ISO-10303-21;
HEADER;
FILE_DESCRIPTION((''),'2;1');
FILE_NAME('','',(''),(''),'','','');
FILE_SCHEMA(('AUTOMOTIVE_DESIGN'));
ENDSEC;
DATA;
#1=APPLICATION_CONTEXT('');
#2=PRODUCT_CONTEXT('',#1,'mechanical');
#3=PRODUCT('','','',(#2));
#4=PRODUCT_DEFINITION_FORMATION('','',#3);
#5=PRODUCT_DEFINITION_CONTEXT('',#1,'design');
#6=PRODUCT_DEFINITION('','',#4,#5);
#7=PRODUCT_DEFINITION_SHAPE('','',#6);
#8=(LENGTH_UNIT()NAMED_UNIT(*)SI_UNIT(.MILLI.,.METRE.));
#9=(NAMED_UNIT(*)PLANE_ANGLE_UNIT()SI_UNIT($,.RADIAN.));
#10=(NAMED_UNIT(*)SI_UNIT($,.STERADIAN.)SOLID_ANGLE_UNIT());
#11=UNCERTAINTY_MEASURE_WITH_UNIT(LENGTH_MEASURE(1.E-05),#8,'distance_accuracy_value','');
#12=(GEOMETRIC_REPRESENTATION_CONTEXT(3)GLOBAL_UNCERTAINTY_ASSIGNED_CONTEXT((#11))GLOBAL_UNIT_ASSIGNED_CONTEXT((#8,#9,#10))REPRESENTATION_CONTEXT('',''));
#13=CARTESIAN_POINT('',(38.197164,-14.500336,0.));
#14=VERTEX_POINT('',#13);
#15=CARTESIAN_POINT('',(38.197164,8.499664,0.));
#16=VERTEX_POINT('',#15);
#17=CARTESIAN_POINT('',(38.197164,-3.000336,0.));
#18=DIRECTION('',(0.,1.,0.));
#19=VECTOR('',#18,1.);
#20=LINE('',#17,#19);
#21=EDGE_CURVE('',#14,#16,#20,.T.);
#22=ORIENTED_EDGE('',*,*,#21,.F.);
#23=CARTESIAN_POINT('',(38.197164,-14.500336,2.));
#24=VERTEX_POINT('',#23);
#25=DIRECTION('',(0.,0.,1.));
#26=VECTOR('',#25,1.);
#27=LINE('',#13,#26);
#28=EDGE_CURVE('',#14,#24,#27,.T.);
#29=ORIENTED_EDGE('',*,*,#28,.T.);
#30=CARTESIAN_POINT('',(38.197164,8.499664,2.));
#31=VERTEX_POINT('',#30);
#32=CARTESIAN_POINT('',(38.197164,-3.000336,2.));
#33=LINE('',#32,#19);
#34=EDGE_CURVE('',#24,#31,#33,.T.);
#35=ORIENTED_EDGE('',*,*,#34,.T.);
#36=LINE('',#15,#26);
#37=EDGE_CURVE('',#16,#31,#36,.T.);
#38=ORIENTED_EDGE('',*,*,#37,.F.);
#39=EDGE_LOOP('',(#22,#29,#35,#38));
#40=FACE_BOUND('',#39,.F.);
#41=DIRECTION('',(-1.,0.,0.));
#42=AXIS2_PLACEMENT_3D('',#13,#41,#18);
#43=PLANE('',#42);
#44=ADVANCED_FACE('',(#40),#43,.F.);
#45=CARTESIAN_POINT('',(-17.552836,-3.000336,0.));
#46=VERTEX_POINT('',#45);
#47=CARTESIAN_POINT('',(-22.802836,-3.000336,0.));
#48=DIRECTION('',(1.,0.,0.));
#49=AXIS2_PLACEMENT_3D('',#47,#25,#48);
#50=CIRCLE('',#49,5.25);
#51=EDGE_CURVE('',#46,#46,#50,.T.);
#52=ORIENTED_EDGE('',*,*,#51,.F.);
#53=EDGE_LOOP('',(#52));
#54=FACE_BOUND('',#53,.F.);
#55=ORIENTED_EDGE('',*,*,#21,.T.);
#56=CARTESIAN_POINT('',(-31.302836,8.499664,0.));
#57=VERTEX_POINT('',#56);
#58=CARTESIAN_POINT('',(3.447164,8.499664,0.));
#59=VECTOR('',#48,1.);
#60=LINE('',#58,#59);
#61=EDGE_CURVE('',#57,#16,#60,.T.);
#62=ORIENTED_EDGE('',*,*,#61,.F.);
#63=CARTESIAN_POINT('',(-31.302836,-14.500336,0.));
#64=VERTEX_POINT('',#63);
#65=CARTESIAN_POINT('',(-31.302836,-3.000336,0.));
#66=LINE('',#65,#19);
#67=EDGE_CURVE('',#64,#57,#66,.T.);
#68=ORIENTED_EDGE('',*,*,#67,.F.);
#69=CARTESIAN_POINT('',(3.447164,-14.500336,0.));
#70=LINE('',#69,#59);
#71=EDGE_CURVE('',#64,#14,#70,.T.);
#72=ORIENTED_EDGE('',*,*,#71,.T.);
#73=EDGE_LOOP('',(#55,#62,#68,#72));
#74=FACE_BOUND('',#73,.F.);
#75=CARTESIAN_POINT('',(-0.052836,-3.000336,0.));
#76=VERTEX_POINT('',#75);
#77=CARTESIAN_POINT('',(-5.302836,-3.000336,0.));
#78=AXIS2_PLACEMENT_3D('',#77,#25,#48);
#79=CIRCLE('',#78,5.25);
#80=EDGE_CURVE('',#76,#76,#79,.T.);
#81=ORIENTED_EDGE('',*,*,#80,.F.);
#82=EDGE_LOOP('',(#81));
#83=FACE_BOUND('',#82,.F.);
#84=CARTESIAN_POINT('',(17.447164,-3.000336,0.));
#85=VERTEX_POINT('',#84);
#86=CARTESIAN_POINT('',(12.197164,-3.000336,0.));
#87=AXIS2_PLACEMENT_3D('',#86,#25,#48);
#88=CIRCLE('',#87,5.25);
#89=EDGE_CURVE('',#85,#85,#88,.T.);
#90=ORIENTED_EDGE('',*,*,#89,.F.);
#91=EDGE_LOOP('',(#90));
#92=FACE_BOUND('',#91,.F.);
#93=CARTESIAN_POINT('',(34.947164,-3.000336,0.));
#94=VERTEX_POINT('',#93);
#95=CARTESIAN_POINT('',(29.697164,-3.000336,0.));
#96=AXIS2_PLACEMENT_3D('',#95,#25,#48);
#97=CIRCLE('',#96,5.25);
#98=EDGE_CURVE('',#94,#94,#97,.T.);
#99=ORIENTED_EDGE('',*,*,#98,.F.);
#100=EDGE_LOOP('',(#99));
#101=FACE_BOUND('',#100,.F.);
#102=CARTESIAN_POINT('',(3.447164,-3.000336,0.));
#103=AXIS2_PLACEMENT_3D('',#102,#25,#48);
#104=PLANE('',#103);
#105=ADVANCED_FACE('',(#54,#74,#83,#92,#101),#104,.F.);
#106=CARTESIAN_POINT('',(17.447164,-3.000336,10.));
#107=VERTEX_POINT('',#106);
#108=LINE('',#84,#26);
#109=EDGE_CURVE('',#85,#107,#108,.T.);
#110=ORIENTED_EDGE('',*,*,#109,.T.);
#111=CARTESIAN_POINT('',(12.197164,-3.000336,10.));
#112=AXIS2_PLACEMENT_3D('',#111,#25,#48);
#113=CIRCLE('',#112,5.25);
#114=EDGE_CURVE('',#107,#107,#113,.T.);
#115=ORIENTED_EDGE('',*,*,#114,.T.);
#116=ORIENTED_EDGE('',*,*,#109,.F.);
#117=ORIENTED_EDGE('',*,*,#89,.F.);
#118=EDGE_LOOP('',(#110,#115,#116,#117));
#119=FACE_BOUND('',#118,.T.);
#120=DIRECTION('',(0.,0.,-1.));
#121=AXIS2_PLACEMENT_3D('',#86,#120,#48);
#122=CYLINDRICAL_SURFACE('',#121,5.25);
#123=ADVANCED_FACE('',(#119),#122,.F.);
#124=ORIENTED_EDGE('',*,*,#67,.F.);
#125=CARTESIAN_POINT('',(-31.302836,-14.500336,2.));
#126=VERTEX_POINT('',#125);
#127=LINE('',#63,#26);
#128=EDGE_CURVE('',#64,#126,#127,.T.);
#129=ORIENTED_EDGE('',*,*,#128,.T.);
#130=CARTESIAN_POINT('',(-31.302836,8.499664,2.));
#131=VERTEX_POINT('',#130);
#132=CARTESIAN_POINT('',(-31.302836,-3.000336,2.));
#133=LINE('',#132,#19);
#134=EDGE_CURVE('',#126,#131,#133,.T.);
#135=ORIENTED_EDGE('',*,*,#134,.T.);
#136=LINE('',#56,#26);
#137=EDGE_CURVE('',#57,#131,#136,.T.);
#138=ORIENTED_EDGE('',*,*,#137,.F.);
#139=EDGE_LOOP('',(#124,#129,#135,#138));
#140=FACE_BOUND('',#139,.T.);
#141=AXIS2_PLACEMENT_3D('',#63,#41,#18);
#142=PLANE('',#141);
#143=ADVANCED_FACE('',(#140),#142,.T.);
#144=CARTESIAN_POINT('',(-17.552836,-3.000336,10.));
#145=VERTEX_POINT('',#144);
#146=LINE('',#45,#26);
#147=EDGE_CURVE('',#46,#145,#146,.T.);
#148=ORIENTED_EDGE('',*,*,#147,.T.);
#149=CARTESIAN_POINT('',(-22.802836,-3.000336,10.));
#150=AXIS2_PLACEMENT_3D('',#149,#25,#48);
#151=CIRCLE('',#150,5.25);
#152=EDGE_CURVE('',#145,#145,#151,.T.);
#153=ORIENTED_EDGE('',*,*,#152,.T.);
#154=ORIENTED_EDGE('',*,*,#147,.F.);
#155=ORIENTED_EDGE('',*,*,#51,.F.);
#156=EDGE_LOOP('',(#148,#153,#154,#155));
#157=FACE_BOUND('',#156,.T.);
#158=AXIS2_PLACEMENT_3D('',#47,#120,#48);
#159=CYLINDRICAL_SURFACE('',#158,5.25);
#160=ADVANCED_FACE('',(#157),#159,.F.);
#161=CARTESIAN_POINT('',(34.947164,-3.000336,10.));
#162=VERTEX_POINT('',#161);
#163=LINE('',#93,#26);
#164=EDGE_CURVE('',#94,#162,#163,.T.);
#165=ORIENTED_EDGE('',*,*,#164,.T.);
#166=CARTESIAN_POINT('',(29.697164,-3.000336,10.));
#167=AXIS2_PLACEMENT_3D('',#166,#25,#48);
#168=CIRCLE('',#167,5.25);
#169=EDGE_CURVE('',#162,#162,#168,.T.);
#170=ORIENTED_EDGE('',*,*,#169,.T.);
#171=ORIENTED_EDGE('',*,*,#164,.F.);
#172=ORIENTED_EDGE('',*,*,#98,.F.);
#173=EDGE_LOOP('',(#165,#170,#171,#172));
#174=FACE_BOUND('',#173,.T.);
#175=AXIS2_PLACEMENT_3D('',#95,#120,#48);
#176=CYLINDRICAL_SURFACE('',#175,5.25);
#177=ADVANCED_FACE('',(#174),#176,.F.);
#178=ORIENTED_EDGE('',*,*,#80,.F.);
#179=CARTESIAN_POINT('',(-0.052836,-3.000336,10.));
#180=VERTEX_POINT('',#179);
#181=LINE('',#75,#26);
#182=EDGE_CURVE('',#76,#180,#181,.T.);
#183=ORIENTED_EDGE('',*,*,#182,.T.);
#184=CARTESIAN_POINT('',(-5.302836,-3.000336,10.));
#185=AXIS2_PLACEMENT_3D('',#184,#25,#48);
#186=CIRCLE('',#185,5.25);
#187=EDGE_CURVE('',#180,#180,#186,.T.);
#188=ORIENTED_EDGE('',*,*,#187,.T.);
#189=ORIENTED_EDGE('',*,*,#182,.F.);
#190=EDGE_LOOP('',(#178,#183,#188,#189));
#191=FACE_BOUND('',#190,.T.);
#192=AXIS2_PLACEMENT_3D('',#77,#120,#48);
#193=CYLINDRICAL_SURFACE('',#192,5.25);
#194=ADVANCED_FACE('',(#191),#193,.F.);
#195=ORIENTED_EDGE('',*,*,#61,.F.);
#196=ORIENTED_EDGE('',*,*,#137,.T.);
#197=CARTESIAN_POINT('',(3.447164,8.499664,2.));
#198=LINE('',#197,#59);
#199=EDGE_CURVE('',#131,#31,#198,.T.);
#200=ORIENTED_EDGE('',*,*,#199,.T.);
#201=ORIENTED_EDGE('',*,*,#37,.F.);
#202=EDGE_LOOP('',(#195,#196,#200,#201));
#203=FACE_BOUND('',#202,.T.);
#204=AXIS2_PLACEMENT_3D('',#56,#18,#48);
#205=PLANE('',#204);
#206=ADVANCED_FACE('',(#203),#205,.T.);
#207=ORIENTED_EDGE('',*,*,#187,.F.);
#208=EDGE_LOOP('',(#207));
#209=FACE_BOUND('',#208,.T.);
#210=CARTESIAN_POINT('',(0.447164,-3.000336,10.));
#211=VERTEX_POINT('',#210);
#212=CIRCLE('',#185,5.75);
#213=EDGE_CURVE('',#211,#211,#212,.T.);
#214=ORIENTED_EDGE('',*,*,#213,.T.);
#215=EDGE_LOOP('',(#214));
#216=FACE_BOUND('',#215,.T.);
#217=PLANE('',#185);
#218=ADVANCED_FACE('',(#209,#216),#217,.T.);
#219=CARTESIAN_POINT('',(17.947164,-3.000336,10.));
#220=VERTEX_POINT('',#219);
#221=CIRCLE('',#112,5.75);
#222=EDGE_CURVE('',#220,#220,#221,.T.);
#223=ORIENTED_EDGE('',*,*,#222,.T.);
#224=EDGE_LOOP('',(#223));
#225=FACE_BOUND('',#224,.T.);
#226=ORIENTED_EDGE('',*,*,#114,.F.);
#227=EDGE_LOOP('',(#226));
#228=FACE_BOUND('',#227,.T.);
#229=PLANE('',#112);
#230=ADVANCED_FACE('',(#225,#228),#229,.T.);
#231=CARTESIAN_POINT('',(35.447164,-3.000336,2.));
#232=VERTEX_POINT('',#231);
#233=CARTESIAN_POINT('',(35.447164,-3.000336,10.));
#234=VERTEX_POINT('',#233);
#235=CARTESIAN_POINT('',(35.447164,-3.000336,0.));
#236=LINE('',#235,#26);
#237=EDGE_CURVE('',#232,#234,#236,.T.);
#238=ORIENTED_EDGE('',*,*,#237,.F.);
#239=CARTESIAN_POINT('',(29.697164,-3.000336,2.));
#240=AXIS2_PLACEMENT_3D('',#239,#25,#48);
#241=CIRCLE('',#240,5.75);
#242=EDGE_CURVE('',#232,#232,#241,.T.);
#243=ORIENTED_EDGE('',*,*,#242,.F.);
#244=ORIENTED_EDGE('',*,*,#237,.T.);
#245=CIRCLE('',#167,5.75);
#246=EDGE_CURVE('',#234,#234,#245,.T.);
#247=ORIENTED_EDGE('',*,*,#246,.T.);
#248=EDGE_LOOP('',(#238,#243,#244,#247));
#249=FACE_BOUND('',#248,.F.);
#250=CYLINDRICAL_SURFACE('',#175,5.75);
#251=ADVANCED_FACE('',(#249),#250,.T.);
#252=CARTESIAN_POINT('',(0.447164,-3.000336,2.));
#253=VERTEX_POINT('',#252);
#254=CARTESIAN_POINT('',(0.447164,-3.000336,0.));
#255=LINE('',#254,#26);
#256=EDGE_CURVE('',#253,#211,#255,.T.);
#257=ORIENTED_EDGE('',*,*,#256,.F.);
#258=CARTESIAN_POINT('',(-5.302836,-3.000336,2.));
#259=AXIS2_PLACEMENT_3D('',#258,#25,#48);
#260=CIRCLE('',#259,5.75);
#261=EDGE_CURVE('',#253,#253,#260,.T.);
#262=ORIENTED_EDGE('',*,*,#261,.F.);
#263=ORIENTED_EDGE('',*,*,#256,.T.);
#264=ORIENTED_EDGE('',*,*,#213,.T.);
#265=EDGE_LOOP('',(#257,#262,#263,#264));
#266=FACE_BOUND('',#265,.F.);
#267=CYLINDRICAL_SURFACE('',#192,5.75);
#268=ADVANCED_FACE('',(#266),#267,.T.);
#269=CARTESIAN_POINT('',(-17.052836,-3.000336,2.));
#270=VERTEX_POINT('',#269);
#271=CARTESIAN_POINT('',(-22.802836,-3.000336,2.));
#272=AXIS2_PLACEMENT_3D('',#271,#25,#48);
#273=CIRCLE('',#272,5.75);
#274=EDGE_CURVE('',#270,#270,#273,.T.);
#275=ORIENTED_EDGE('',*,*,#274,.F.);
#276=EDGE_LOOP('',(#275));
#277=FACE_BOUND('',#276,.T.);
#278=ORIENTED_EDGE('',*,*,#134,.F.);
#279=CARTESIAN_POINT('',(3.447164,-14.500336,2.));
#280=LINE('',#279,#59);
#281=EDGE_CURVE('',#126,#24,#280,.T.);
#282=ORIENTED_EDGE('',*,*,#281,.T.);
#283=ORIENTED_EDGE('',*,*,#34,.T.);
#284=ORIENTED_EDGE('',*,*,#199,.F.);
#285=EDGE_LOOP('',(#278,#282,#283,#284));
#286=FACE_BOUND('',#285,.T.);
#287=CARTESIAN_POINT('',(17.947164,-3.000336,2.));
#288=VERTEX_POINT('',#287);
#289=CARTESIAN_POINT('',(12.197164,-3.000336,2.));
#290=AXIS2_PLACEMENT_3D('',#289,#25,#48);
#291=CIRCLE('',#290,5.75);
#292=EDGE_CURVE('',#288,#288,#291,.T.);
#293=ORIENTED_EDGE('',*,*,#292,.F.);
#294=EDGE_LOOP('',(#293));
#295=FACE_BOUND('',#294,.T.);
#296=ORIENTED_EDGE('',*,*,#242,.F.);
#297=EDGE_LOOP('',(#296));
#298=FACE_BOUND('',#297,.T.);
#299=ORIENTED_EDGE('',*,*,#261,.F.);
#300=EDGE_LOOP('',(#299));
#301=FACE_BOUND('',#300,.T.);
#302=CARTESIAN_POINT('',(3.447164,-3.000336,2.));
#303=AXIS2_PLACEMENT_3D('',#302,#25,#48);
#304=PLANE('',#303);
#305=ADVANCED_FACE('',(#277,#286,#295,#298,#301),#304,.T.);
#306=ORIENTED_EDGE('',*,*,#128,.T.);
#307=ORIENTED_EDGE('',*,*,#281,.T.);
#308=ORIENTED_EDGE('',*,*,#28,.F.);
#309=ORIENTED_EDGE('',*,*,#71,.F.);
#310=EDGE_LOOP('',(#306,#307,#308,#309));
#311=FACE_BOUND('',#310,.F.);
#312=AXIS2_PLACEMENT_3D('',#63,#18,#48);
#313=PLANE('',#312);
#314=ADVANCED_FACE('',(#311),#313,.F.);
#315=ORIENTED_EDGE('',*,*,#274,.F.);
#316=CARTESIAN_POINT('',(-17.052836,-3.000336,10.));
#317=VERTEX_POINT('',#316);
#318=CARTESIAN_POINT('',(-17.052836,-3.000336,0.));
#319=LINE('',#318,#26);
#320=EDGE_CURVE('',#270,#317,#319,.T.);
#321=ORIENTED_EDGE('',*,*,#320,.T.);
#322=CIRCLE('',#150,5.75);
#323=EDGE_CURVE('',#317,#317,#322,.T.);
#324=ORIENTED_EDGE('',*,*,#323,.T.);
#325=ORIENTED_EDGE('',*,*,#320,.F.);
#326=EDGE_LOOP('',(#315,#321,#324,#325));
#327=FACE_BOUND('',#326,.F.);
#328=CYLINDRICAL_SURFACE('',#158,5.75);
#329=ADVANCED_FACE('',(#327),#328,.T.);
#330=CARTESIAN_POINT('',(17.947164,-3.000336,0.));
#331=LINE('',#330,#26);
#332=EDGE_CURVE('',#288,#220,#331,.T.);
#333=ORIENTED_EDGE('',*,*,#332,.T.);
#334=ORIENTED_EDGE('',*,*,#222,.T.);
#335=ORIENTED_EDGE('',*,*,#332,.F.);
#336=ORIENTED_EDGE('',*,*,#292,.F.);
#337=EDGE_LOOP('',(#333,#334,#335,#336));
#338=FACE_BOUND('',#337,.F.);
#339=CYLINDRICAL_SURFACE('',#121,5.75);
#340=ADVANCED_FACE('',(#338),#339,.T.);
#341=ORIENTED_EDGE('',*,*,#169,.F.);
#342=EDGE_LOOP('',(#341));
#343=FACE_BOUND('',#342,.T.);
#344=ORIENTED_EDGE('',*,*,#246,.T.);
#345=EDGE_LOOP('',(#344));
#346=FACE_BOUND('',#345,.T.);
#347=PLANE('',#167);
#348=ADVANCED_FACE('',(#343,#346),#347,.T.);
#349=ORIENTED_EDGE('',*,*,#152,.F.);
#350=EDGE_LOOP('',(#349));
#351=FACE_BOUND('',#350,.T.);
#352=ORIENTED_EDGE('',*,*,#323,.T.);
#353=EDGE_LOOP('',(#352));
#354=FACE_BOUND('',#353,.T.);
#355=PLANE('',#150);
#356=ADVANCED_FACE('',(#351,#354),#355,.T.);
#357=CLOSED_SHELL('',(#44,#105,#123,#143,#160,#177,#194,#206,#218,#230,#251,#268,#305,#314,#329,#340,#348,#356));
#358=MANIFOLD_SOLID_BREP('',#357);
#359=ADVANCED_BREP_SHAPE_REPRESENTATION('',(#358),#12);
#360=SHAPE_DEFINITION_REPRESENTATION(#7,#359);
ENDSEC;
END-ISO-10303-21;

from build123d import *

# Parameters (mm, degrees)
F0_W     = 69.5
F0_H     = 23
F0_R     = 5.75
F0_W_2   = 1
F0_H_2   = 4
F1_DEPTH = 2
F0_R_2   = 5.25
F2_DEPTH = 10


with BuildPart() as f1:
    # F0 (on Top) → F1 (new body)
    with BuildSketch(Plane.XY):
        with Locations((3.4471642077, -3.0003356891)):
            Rectangle(F0_W, F0_H)
        Polygon((-29.8028357923, -13.0003356891), (-29.8028357923, 6.9996643109), (-15.8028357923, 6.9996643109), (-14.8028357923, 6.9996643109), (-13.3028357923, 6.9996643109), (-12.3028357923, 6.9996643109), (1.6971642077, 6.9996643109), (2.6971642077, 6.9996643109), (4.1971642077, 6.9996643109), (5.1971642077, 6.9996643109), (19.1971642077, 6.9996643109), (20.1971642077, 6.9996643109), (21.6971642077, 6.9996643109), (22.6971642077, 6.9996643109), (36.6971642077, 6.9996643109), (36.6971642077, -13.0003356891), (22.6971642077, -13.0003356891), (21.6971642077, -13.0003356891), (20.1971642077, -13.0003356891), (19.1971642077, -13.0003356891), (5.1971642077, -13.0003356891), (5.1971642077, -9.0003356891), (4.1971642077, -9.0003356891), (4.1971642077, -13.0003356891), (2.6971642077, -13.0003356891), (1.6971642077, -13.0003356891), (-12.3028357923, -13.0003356891), (-13.3028357923, -13.0003356891), (-14.8028357923, -13.0003356891), (-15.8028357923, -13.0003356891), align=None, mode=Mode.SUBTRACT)
        Polygon((-15.8028357923, 6.9996643109), (-29.8028357923, 6.9996643109), (-29.8028357923, -13.0003356891), (-15.8028357923, -13.0003356891), (-15.8028357923, -9.0003356891), (-14.8028357923, -9.0003356891), (-14.8028357923, -13.0003356891), (-13.3028357923, -13.0003356891), (-13.3028357923, -9.0003356891), (-12.3028357923, -9.0003356891), (-12.3028357923, -13.0003356891), (1.6971642077, -13.0003356891), (1.6971642077, -9.0003356891), (2.6971642077, -9.0003356891), (2.6971642077, -13.0003356891), (4.1971642077, -13.0003356891), (4.1971642077, -9.0003356891), (5.1971642077, -9.0003356891), (5.1971642077, -13.0003356891), (19.1971642077, -13.0003356891), (19.1971642077, -9.0003356891), (20.1971642077, -9.0003356891), (20.1971642077, -13.0003356891), (21.6971642077, -13.0003356891), (21.6971642077, -9.0003356891), (22.6971642077, -9.0003356891), (22.6971642077, -13.0003356891), (36.6971642077, -13.0003356891), (36.6971642077, 6.9996643109), (22.6971642077, 6.9996643109), (22.6971642077, 2.9996643109), (21.6971642077, 2.9996643109), (21.6971642077, 6.9996643109), (20.1971642077, 6.9996643109), (20.1971642077, 2.9996643109), (19.1971642077, 2.9996643109), (19.1971642077, 6.9996643109), (5.1971642077, 6.9996643109), (5.1971642077, 2.9996643109), (4.1971642077, 2.9996643109), (4.1971642077, 6.9996643109), (2.6971642077, 6.9996643109), (2.6971642077, 2.9996643109), (1.6971642077, 2.9996643109), (1.6971642077, 6.9996643109), (-12.3028357923, 6.9996643109), (-12.3028357923, 2.9996643109), (-13.3028357923, 2.9996643109), (-13.3028357923, 6.9996643109), (-14.8028357923, 6.9996643109), (-14.8028357923, 2.9996643109), (-15.8028357923, 2.9996643109), align=None)
        with Locations((-22.8028357923, -3.0003356891)):
            Circle(F0_R, mode=Mode.SUBTRACT)
        with Locations((-5.3028357923, -3.0003356891)):
            Circle(F0_R, mode=Mode.SUBTRACT)
        with Locations((12.1971642077, -3.0003356891)):
            Circle(F0_R, mode=Mode.SUBTRACT)
        with Locations((29.6971642077, -3.0003356891)):
            Circle(F0_R, mode=Mode.SUBTRACT)
        with Locations((-15.3028357923, 4.9996643109)):
            Rectangle(F0_W_2, F0_H_2)
        with Locations((-12.8028357923, 4.9996643109)):
            Rectangle(F0_W_2, F0_H_2)
        with Locations((2.1971642077, 4.9996643109)):
            Rectangle(F0_W_2, F0_H_2)
        with Locations((4.6971642077, 4.9996643109)):
            Rectangle(F0_W_2, F0_H_2)
        with Locations((19.6971642077, 4.9996643109)):
            Rectangle(F0_W_2, F0_H_2)
        with Locations((22.1971642077, 4.9996643109)):
            Rectangle(F0_W_2, F0_H_2)
        with Locations((-15.3028357923, -11.0003356891)):
            Rectangle(F0_W_2, F0_H_2)
        with Locations((-12.8028357923, -11.0003356891)):
            Rectangle(F0_W_2, F0_H_2)
        with Locations((2.1971642077, -11.0003356891)):
            Rectangle(F0_W_2, F0_H_2)
        with Locations((19.6971642077, -11.0003356891)):
            Rectangle(F0_W_2, F0_H_2)
        with Locations((22.1971642077, -11.0003356891)):
            Rectangle(F0_W_2, F0_H_2)
    extrude(amount=F1_DEPTH)

    # F0 (on Top) → F2 (join)
    with BuildSketch(Plane.XY):
        with Locations((-22.8028357923, -3.0003356891)):
            Circle(F0_R)
        with Locations((-22.8028357923, -3.0003356891)):
            Circle(F0_R_2, mode=Mode.SUBTRACT)
        with Locations((-5.3028357923, -3.0003356891)):
            Circle(F0_R)
        with Locations((-5.3028357923, -3.0003356891)):
            Circle(F0_R_2, mode=Mode.SUBTRACT)
        with Locations((12.1971642077, -3.0003356891)):
            Circle(F0_R)
        with Locations((12.1971642077, -3.0003356891)):
            Circle(F0_R_2, mode=Mode.SUBTRACT)
        with Locations((29.6971642077, -3.0003356891)):
            Circle(F0_R)
        with Locations((29.6971642077, -3.0003356891)):
            Circle(F0_R_2, mode=Mode.SUBTRACT)
    extrude(amount=F2_DEPTH)


solid = f1.part
